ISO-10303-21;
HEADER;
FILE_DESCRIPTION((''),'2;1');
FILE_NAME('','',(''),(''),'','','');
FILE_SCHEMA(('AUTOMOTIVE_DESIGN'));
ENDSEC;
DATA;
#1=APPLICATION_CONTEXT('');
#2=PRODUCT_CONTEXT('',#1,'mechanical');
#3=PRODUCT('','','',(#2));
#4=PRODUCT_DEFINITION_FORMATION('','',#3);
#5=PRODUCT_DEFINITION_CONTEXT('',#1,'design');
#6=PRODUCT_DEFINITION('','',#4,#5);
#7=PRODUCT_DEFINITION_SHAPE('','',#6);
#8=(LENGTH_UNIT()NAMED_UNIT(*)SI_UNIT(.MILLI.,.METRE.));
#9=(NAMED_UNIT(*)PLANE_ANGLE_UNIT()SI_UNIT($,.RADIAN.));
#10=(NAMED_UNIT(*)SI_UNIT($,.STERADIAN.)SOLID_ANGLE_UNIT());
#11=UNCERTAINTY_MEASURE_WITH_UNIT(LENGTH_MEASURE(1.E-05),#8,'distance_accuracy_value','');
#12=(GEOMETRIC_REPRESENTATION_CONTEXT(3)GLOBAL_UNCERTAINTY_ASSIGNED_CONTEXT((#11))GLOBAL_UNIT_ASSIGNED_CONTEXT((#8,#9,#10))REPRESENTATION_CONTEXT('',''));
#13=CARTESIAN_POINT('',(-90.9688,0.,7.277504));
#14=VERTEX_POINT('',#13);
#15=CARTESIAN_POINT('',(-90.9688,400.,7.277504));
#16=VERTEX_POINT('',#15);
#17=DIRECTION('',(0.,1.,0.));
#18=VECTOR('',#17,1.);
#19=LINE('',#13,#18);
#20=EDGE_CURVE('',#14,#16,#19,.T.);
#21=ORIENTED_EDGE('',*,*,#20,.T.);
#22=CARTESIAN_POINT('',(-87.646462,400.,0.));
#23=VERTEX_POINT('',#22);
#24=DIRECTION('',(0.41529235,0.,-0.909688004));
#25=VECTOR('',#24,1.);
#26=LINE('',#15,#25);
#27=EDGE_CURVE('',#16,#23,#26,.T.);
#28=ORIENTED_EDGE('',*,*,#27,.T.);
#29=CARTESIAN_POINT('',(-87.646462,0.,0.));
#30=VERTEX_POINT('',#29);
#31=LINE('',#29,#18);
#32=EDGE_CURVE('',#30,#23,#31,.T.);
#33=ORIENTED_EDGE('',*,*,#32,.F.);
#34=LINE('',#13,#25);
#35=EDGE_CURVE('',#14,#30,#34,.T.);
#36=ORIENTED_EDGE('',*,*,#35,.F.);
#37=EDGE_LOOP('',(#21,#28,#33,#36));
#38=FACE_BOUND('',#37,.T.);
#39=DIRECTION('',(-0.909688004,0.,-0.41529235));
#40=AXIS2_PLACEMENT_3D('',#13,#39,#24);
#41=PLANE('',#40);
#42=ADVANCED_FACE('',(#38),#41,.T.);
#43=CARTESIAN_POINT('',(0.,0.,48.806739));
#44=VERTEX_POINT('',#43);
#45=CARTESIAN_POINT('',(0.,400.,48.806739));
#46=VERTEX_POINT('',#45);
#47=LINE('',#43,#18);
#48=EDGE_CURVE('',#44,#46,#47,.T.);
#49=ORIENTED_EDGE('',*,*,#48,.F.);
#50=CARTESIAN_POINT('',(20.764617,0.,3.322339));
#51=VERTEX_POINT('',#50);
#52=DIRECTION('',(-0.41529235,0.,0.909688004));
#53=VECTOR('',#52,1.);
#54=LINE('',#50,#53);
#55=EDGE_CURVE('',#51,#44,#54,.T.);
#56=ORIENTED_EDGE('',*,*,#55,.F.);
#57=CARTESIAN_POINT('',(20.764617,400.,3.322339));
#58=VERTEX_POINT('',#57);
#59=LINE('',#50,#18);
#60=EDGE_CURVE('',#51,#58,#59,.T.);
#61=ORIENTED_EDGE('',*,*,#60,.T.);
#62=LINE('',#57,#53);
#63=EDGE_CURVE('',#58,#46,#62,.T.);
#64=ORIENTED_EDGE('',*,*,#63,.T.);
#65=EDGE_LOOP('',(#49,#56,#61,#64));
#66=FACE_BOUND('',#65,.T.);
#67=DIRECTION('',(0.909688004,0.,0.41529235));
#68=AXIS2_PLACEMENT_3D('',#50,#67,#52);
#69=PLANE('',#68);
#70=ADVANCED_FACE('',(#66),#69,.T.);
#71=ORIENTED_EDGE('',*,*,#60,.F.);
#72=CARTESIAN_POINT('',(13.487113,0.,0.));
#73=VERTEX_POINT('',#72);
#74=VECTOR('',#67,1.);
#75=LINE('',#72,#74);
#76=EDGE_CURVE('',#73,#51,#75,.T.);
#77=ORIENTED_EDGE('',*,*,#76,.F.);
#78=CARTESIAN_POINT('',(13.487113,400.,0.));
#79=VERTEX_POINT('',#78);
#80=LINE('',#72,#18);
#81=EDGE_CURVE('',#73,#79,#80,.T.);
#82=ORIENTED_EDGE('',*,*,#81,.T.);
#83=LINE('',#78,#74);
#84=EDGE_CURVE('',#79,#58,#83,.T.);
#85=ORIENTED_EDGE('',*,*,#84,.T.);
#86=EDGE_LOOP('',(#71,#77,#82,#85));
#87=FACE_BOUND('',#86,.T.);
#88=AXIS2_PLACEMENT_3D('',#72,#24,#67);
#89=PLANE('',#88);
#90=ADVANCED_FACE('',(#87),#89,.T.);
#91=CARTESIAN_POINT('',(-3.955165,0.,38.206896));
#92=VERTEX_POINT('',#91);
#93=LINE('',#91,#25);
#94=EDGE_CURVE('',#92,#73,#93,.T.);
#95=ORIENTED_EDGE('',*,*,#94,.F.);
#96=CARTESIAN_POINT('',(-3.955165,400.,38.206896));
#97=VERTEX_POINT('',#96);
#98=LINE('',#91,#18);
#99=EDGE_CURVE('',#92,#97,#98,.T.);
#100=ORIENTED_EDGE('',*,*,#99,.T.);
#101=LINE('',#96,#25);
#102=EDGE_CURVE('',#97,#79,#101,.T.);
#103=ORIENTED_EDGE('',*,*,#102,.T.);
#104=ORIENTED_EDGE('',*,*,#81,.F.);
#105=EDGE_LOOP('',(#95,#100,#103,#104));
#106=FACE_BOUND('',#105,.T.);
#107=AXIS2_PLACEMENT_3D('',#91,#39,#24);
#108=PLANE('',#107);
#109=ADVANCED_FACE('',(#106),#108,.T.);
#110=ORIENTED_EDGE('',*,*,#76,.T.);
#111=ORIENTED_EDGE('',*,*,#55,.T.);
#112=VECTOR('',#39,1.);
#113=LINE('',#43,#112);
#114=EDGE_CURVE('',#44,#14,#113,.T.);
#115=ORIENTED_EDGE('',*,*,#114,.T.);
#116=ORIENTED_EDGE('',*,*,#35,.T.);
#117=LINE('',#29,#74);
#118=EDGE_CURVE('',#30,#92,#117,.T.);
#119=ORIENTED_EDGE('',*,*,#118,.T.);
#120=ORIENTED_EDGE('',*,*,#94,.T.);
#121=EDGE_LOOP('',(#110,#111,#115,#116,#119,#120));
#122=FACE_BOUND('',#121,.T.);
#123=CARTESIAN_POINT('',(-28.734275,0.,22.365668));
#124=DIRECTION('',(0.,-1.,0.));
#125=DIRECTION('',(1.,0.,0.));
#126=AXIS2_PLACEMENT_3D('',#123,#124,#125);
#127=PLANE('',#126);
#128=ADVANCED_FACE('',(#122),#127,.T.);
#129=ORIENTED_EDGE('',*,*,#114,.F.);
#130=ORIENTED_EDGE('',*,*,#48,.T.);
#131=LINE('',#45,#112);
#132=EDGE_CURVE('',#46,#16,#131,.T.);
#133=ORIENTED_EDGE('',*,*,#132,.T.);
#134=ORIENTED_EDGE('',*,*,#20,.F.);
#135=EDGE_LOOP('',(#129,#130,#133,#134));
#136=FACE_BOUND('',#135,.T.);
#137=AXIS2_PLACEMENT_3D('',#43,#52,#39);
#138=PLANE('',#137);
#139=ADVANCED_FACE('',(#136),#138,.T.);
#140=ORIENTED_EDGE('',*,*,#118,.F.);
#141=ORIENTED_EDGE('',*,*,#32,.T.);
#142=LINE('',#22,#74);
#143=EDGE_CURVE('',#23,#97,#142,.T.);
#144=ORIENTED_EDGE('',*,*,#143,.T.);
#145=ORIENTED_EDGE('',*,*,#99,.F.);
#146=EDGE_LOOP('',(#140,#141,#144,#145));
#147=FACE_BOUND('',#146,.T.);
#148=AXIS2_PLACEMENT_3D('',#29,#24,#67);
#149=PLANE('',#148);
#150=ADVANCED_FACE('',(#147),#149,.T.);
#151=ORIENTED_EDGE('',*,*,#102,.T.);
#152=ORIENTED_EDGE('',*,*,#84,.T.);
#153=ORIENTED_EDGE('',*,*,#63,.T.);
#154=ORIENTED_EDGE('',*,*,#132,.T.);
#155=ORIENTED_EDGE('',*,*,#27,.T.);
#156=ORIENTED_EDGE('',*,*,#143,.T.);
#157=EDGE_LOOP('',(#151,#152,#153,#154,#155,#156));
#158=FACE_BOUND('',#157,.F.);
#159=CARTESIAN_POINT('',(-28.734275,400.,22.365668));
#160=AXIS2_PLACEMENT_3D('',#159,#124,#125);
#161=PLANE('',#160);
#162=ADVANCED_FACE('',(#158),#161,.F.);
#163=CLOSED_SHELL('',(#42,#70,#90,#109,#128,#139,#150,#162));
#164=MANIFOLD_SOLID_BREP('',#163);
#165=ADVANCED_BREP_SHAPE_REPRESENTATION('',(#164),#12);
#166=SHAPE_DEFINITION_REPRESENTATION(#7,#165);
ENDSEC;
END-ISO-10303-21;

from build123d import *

# Parameters (mm, degrees)
F1_DEPTH = 400


# Not quite as in the source:
# - the program builds the solid bodies; features that only make, move or delete a surface that nothing else refers to are left out


with BuildPart() as f1:
    # F0 (on Front) → F1 (new body)
    with BuildSketch(Plane.XZ):
        Polygon((-90.9688003863, 7.2775040309), (-87.6464615896, 0), (-3.9551652342, 38.2068961622), (13.4871134486, 0), (20.7646174795, 3.3223387967), (0, 48.8067389899), align=None)
    extrude(amount=-F1_DEPTH)


solid = f1.part
